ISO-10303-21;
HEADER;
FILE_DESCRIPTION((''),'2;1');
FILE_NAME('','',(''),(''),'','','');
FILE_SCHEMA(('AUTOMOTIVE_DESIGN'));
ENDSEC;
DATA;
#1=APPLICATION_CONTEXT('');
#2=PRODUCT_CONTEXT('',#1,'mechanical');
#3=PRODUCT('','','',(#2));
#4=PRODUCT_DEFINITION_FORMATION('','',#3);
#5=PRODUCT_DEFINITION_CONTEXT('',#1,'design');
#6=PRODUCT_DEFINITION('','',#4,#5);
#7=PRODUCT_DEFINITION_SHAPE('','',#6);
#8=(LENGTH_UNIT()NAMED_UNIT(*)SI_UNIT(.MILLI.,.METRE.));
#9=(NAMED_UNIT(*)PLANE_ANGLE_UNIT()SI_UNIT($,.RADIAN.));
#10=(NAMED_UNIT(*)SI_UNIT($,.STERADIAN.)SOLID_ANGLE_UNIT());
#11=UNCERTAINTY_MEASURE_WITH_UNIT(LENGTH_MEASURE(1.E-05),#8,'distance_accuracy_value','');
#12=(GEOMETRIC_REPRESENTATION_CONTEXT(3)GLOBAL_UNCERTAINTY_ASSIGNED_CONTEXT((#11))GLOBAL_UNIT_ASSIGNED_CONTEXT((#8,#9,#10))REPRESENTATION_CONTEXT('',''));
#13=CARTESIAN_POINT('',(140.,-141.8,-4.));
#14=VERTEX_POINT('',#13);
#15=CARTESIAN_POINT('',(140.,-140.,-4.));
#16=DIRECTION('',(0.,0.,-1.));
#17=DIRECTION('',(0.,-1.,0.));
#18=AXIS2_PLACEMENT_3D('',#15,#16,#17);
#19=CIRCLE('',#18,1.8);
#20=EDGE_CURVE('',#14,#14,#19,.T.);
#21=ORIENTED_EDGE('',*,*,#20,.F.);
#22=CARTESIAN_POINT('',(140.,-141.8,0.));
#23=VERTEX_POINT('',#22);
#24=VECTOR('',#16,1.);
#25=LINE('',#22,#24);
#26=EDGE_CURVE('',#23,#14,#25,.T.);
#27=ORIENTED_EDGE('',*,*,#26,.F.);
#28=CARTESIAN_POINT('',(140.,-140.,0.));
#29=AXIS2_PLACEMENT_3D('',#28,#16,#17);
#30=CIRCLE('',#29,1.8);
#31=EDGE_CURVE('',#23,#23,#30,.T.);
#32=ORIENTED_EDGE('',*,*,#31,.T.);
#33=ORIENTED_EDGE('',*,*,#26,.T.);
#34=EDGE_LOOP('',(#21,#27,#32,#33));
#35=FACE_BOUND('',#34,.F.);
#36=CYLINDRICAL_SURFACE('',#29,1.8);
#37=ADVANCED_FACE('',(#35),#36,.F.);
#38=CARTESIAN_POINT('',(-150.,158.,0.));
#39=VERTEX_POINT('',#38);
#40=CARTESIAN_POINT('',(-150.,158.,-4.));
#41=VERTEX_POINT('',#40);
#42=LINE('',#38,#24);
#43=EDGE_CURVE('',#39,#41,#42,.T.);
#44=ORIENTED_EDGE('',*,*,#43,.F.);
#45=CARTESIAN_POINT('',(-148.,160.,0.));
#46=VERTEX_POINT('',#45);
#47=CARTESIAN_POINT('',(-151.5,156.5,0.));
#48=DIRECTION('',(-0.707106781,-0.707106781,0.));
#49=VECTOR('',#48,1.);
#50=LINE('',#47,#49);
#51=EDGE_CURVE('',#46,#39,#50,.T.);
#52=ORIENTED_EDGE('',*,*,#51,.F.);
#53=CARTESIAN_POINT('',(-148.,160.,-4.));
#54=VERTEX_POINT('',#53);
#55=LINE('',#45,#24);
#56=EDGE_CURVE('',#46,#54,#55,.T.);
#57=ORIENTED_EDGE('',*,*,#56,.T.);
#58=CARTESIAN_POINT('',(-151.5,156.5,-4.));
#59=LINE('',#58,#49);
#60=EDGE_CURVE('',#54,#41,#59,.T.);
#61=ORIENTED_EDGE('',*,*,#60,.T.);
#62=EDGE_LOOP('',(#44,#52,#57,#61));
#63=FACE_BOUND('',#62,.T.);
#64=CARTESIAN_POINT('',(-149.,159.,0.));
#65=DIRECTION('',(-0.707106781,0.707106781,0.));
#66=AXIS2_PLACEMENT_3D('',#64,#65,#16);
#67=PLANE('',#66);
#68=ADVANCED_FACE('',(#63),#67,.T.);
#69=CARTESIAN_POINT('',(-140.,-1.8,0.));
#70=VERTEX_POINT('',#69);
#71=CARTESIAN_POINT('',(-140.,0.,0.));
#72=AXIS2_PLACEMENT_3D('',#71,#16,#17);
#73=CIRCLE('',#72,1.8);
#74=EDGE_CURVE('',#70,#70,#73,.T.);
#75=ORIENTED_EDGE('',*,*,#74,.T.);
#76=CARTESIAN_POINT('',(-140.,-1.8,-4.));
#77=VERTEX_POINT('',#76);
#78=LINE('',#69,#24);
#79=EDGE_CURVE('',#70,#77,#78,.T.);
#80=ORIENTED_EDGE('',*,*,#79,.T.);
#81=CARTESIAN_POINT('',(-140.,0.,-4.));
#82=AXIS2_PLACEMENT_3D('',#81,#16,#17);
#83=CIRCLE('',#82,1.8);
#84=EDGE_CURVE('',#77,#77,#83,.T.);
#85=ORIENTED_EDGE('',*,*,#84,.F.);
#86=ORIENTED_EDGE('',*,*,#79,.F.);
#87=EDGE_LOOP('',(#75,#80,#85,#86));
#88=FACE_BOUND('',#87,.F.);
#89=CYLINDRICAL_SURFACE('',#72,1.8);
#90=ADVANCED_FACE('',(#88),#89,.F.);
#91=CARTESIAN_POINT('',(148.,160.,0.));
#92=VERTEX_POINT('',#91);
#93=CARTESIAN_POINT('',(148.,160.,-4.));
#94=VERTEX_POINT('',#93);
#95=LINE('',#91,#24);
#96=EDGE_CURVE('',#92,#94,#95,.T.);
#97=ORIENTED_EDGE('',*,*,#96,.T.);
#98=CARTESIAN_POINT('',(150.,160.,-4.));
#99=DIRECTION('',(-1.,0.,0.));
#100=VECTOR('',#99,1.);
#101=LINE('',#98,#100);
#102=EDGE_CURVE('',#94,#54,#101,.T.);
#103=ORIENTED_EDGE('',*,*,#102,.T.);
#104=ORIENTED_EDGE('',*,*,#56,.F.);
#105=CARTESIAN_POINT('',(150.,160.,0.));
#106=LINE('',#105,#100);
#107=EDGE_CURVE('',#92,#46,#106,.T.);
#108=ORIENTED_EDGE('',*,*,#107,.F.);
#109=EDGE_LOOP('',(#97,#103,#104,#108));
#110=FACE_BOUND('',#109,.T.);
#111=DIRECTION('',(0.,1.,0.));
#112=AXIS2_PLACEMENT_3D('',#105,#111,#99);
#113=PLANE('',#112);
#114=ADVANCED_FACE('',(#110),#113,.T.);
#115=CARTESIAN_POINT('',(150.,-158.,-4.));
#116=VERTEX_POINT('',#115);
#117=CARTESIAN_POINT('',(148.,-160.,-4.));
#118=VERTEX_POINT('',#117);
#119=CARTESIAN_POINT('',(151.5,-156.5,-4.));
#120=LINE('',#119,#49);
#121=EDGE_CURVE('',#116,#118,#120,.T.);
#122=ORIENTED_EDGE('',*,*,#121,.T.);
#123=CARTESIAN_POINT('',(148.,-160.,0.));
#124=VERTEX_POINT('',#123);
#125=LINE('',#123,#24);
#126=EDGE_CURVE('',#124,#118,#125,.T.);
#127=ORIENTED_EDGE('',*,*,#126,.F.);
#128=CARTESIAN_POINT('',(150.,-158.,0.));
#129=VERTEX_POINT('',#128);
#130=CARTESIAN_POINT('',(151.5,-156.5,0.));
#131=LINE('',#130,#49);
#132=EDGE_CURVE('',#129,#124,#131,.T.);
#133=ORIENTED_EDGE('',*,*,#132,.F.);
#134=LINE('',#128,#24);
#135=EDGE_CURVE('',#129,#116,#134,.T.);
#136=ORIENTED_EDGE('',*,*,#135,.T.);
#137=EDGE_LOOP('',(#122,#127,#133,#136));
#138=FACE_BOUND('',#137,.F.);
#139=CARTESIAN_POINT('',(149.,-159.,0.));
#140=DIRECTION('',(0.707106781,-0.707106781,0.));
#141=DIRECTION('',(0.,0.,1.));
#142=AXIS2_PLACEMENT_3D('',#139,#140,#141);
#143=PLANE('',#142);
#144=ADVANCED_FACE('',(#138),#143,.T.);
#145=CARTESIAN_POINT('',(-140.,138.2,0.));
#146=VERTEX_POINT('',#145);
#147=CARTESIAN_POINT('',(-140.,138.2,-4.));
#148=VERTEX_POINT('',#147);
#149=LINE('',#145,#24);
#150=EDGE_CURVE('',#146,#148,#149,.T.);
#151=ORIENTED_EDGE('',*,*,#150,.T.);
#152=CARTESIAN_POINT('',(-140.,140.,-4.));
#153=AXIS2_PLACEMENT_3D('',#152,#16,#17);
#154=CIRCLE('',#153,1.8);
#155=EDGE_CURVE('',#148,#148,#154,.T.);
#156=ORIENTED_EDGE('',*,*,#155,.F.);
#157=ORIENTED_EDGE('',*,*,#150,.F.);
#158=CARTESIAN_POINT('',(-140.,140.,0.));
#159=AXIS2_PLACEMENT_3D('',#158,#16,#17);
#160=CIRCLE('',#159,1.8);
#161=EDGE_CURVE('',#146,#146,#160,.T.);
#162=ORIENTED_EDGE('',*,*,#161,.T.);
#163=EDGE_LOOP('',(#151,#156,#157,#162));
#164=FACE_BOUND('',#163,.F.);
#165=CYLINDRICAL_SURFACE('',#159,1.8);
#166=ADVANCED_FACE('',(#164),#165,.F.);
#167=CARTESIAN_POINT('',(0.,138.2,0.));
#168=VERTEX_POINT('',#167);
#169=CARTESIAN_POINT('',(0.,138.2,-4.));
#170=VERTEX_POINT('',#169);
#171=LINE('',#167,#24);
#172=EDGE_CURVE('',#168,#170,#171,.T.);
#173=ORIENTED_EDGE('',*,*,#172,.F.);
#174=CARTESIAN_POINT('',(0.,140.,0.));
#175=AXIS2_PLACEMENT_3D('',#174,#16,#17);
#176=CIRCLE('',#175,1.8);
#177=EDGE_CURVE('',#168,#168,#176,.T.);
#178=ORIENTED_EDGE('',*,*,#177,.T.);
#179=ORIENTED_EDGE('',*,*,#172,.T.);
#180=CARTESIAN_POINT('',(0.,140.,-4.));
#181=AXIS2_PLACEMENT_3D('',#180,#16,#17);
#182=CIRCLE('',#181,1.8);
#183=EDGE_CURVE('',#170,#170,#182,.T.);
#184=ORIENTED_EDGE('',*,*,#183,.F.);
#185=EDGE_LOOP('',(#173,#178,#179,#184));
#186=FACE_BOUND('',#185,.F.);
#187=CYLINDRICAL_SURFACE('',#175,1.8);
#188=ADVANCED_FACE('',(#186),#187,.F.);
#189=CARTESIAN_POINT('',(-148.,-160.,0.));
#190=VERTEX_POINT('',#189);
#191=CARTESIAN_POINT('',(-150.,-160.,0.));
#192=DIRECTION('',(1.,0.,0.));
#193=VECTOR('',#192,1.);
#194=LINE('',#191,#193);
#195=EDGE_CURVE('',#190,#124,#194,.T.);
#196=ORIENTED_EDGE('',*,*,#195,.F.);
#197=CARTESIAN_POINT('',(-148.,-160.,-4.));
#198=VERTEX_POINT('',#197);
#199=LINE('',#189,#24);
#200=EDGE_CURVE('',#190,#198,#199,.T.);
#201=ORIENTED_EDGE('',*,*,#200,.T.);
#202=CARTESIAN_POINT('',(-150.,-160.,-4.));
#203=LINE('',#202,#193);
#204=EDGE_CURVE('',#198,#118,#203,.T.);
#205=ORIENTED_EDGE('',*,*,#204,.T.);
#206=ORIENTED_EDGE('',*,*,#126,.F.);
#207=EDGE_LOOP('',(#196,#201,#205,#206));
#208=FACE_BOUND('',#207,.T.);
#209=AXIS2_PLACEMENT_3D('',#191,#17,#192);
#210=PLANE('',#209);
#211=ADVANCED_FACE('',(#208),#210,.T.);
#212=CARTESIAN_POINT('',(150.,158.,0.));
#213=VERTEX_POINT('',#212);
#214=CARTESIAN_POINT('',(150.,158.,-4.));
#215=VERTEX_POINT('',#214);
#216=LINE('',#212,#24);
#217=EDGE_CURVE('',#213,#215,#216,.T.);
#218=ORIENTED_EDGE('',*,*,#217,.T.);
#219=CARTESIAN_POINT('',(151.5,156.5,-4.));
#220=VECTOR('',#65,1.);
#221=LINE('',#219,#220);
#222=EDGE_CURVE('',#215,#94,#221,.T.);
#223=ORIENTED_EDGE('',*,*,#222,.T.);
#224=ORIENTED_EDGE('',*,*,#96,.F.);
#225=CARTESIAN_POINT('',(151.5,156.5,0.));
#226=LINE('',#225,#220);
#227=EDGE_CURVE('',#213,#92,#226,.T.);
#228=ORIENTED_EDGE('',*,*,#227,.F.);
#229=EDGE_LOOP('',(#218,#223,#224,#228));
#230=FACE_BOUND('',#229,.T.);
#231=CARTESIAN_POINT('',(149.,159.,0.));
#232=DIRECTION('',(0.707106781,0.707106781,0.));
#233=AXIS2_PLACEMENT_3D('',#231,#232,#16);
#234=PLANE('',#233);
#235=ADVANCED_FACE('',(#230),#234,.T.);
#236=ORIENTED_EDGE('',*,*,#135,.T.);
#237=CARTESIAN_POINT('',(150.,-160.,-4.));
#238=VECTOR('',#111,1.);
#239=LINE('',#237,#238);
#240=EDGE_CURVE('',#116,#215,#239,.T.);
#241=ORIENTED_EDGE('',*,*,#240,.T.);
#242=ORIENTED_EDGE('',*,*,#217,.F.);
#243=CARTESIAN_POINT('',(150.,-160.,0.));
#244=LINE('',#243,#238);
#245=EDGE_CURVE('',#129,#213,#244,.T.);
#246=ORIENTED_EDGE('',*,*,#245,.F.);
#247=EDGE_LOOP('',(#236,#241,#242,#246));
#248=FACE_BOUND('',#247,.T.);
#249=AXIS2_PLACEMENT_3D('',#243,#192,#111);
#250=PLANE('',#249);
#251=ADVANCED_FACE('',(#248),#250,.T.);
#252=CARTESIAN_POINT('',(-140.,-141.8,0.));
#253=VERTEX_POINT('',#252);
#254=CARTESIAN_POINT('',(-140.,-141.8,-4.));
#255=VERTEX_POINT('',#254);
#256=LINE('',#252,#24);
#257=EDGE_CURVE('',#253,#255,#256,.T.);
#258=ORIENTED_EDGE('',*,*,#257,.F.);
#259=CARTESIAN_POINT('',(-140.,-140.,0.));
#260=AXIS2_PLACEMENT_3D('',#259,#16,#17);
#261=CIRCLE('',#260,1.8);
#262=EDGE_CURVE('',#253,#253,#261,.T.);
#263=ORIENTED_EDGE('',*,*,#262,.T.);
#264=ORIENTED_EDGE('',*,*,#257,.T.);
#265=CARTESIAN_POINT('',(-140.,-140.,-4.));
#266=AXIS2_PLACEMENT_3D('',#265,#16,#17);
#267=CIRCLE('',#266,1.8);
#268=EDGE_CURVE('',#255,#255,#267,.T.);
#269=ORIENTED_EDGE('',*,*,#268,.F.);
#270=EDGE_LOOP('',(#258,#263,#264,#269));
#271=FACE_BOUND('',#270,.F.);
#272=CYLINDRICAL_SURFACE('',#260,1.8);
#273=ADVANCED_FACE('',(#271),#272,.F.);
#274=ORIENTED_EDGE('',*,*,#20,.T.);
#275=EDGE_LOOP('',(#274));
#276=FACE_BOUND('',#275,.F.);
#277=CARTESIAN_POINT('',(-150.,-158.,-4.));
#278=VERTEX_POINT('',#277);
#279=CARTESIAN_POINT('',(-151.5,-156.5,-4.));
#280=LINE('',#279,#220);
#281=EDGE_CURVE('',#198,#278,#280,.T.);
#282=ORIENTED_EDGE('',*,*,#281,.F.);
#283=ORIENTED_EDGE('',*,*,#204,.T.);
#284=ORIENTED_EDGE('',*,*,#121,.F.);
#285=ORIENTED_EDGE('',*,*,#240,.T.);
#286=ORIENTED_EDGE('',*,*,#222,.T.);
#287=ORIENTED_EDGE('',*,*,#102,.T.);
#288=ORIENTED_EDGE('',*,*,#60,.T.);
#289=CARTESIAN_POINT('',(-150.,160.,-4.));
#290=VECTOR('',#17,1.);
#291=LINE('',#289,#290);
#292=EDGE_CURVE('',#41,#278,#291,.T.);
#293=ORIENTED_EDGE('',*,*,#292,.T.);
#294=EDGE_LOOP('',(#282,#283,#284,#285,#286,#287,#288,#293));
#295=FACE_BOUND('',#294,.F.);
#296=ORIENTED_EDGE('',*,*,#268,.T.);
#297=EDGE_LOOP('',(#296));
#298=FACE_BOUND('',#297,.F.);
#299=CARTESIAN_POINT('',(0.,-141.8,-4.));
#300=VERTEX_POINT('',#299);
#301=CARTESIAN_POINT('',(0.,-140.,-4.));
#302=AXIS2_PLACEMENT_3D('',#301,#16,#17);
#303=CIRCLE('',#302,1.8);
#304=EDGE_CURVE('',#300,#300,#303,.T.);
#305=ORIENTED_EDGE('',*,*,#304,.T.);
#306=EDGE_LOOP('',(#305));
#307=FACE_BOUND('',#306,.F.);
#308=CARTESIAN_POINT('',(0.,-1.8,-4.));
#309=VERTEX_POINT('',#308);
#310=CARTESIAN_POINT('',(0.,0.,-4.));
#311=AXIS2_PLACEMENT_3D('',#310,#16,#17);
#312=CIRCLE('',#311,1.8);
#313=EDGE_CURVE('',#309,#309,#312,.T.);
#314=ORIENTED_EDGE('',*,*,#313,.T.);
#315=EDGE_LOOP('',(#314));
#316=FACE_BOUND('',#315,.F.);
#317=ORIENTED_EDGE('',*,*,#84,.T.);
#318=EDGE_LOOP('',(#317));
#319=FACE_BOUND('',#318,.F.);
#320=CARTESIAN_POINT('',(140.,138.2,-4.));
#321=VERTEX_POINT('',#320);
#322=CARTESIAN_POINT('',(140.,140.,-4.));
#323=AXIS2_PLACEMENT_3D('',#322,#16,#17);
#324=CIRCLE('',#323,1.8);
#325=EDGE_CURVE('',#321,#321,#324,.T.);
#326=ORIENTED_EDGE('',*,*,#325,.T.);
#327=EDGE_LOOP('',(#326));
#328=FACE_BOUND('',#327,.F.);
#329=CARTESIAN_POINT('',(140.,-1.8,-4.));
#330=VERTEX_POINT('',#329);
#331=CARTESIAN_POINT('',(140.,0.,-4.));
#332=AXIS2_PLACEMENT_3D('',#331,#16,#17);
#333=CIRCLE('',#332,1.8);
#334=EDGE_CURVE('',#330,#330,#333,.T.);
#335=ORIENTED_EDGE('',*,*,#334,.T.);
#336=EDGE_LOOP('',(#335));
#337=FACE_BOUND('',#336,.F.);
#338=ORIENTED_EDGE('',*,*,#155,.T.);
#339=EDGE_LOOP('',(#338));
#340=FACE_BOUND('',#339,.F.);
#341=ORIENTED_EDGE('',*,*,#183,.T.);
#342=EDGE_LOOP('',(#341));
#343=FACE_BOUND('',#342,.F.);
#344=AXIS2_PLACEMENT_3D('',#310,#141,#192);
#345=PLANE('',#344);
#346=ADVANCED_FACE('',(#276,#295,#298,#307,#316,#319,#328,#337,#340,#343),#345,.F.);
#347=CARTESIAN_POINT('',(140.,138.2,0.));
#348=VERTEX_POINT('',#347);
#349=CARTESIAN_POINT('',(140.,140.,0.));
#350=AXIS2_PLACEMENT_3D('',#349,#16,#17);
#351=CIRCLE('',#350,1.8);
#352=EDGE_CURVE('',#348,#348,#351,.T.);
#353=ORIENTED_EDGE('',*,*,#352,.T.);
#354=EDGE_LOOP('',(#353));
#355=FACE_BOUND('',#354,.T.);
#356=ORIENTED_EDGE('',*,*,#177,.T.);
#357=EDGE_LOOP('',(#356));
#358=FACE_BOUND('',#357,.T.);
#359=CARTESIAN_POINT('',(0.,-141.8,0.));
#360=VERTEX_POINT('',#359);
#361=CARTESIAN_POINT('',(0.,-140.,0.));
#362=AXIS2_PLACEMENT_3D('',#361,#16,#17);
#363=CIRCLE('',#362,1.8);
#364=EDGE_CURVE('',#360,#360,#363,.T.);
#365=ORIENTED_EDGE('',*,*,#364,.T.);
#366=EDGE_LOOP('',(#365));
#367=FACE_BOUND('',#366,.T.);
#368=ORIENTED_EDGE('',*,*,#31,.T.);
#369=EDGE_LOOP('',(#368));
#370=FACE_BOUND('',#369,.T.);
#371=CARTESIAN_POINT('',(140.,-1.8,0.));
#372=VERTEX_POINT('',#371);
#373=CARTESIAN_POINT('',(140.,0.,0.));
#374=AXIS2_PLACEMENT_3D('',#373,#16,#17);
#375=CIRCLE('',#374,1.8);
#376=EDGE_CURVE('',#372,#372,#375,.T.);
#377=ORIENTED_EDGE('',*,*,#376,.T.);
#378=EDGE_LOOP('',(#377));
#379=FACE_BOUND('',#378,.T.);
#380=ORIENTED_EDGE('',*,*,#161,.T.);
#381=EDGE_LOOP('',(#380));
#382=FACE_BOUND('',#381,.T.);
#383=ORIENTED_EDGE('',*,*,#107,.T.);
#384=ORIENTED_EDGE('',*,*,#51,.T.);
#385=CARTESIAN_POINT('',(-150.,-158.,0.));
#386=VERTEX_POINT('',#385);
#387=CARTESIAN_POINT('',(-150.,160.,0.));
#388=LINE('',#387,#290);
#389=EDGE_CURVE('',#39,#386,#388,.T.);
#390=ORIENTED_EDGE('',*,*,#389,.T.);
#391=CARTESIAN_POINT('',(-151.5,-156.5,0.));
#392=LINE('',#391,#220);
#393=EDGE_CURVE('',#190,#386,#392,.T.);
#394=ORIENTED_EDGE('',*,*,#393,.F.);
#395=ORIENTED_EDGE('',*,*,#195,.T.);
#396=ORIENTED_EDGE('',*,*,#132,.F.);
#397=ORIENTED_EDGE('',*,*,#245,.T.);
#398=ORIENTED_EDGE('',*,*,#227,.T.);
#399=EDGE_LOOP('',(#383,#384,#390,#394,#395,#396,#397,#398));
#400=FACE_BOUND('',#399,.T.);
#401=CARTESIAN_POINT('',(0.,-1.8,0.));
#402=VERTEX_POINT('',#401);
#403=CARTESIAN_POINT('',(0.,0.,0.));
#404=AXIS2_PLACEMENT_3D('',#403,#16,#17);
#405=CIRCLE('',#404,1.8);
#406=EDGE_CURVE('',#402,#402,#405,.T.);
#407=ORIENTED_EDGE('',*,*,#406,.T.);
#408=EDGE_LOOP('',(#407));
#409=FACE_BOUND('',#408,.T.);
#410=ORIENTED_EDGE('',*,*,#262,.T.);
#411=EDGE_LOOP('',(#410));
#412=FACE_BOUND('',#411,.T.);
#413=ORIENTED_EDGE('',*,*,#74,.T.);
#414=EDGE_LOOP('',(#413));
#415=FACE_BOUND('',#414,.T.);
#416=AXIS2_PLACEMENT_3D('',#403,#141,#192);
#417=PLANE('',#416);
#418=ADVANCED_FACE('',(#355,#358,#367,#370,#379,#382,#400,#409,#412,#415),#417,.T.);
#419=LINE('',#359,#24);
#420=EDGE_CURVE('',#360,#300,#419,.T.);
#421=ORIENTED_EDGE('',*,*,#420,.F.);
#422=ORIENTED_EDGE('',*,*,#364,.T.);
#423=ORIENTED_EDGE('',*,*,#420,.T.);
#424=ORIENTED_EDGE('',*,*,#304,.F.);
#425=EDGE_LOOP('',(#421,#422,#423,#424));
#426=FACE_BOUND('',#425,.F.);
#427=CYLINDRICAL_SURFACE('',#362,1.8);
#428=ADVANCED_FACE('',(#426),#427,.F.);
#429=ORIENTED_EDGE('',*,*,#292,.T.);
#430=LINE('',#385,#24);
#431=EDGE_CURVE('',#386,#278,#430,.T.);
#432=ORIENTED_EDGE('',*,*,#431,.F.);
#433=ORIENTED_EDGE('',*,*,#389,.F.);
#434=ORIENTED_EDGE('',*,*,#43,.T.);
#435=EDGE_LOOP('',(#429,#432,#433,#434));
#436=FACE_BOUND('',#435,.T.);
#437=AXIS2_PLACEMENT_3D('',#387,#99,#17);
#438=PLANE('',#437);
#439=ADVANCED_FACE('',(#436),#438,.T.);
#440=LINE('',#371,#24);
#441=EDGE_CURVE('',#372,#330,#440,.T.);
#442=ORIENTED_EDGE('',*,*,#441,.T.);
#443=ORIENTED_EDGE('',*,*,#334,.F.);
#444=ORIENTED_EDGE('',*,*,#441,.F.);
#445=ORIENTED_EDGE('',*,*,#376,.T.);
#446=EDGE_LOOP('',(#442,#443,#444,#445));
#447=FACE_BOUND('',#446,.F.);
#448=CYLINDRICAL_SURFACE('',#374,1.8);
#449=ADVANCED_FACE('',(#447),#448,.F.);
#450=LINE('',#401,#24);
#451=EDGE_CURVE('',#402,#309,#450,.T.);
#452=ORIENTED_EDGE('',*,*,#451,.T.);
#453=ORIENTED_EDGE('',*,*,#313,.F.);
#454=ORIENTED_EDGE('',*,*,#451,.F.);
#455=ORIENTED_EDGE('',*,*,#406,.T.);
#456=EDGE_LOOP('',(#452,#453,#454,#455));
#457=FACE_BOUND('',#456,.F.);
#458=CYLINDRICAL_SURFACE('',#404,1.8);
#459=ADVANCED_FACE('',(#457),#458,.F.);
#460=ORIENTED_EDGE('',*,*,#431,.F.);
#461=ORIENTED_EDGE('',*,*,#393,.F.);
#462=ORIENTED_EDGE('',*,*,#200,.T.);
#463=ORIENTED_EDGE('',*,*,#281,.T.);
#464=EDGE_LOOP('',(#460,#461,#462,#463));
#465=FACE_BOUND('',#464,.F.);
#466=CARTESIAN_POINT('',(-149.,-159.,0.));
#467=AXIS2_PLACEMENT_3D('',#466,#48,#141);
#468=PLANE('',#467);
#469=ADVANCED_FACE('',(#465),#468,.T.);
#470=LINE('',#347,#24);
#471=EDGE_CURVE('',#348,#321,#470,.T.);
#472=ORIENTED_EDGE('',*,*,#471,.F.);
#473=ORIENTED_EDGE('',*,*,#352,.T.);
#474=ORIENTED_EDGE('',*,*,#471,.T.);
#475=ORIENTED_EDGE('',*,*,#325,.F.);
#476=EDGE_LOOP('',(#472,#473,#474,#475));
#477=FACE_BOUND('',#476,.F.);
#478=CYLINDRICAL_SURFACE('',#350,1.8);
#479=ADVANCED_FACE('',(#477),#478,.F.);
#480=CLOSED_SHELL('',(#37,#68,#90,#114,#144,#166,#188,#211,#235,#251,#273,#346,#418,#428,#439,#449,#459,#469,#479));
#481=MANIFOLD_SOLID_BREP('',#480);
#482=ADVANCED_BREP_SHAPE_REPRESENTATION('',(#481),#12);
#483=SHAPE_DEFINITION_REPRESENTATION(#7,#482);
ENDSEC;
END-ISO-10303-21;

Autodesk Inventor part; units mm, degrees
ref_plane "YZ Plane" through (0, 0, 0) normal (1, 0, 0) x (0, 1, 0)
ref_plane "XZ Plane" through (0, 0, 0) normal (0, 1, 0) x (-1, 0, 0)
ref_plane "XY Plane" through (0, 0, 0) normal (0, 0, 1) x (1, 0, 0)
sketch "Sketch1" plane through (0, 0, 0) normal (0, 0, 1) x (1, 0, 0)
  line L0 (150, 160) -> (-150, 160)
  line L1 (-150, 160) -> (-150, -160)
  line L2 (-150, -160) -> (150, -160)
  line L3 (150, -160) -> (150, 160)
  line L4 (150, 160) -> (-150, -160) construction
  line L5 (-150, 160) -> (150, -160) construction
  point P0 (0, 0)
  point P1 (0, 0)
  dimension "d0" = 300
  dimension "d1" = 320
extrude "Extrusion1" add sketch "Sketch1" against normal blind 4
hole "Hole1" at (0, 0, 0) direction (0, 0, -1) diameter 3.6 end through all
chamfer "Chamfer1" distance 2 angle 45 4 edges at (150, 160, -2) (150, -160, -2) (-150, 160, -2) (-150, -160, -2)
pattern_linear "Rectangular Pattern1" count 3 spacing 140 along (1, 0, 0) count 3 spacing 140 along (0, 1, 0) of "Hole1" first direction both ways yes second direction both ways yes
properties part number "caddy2"
